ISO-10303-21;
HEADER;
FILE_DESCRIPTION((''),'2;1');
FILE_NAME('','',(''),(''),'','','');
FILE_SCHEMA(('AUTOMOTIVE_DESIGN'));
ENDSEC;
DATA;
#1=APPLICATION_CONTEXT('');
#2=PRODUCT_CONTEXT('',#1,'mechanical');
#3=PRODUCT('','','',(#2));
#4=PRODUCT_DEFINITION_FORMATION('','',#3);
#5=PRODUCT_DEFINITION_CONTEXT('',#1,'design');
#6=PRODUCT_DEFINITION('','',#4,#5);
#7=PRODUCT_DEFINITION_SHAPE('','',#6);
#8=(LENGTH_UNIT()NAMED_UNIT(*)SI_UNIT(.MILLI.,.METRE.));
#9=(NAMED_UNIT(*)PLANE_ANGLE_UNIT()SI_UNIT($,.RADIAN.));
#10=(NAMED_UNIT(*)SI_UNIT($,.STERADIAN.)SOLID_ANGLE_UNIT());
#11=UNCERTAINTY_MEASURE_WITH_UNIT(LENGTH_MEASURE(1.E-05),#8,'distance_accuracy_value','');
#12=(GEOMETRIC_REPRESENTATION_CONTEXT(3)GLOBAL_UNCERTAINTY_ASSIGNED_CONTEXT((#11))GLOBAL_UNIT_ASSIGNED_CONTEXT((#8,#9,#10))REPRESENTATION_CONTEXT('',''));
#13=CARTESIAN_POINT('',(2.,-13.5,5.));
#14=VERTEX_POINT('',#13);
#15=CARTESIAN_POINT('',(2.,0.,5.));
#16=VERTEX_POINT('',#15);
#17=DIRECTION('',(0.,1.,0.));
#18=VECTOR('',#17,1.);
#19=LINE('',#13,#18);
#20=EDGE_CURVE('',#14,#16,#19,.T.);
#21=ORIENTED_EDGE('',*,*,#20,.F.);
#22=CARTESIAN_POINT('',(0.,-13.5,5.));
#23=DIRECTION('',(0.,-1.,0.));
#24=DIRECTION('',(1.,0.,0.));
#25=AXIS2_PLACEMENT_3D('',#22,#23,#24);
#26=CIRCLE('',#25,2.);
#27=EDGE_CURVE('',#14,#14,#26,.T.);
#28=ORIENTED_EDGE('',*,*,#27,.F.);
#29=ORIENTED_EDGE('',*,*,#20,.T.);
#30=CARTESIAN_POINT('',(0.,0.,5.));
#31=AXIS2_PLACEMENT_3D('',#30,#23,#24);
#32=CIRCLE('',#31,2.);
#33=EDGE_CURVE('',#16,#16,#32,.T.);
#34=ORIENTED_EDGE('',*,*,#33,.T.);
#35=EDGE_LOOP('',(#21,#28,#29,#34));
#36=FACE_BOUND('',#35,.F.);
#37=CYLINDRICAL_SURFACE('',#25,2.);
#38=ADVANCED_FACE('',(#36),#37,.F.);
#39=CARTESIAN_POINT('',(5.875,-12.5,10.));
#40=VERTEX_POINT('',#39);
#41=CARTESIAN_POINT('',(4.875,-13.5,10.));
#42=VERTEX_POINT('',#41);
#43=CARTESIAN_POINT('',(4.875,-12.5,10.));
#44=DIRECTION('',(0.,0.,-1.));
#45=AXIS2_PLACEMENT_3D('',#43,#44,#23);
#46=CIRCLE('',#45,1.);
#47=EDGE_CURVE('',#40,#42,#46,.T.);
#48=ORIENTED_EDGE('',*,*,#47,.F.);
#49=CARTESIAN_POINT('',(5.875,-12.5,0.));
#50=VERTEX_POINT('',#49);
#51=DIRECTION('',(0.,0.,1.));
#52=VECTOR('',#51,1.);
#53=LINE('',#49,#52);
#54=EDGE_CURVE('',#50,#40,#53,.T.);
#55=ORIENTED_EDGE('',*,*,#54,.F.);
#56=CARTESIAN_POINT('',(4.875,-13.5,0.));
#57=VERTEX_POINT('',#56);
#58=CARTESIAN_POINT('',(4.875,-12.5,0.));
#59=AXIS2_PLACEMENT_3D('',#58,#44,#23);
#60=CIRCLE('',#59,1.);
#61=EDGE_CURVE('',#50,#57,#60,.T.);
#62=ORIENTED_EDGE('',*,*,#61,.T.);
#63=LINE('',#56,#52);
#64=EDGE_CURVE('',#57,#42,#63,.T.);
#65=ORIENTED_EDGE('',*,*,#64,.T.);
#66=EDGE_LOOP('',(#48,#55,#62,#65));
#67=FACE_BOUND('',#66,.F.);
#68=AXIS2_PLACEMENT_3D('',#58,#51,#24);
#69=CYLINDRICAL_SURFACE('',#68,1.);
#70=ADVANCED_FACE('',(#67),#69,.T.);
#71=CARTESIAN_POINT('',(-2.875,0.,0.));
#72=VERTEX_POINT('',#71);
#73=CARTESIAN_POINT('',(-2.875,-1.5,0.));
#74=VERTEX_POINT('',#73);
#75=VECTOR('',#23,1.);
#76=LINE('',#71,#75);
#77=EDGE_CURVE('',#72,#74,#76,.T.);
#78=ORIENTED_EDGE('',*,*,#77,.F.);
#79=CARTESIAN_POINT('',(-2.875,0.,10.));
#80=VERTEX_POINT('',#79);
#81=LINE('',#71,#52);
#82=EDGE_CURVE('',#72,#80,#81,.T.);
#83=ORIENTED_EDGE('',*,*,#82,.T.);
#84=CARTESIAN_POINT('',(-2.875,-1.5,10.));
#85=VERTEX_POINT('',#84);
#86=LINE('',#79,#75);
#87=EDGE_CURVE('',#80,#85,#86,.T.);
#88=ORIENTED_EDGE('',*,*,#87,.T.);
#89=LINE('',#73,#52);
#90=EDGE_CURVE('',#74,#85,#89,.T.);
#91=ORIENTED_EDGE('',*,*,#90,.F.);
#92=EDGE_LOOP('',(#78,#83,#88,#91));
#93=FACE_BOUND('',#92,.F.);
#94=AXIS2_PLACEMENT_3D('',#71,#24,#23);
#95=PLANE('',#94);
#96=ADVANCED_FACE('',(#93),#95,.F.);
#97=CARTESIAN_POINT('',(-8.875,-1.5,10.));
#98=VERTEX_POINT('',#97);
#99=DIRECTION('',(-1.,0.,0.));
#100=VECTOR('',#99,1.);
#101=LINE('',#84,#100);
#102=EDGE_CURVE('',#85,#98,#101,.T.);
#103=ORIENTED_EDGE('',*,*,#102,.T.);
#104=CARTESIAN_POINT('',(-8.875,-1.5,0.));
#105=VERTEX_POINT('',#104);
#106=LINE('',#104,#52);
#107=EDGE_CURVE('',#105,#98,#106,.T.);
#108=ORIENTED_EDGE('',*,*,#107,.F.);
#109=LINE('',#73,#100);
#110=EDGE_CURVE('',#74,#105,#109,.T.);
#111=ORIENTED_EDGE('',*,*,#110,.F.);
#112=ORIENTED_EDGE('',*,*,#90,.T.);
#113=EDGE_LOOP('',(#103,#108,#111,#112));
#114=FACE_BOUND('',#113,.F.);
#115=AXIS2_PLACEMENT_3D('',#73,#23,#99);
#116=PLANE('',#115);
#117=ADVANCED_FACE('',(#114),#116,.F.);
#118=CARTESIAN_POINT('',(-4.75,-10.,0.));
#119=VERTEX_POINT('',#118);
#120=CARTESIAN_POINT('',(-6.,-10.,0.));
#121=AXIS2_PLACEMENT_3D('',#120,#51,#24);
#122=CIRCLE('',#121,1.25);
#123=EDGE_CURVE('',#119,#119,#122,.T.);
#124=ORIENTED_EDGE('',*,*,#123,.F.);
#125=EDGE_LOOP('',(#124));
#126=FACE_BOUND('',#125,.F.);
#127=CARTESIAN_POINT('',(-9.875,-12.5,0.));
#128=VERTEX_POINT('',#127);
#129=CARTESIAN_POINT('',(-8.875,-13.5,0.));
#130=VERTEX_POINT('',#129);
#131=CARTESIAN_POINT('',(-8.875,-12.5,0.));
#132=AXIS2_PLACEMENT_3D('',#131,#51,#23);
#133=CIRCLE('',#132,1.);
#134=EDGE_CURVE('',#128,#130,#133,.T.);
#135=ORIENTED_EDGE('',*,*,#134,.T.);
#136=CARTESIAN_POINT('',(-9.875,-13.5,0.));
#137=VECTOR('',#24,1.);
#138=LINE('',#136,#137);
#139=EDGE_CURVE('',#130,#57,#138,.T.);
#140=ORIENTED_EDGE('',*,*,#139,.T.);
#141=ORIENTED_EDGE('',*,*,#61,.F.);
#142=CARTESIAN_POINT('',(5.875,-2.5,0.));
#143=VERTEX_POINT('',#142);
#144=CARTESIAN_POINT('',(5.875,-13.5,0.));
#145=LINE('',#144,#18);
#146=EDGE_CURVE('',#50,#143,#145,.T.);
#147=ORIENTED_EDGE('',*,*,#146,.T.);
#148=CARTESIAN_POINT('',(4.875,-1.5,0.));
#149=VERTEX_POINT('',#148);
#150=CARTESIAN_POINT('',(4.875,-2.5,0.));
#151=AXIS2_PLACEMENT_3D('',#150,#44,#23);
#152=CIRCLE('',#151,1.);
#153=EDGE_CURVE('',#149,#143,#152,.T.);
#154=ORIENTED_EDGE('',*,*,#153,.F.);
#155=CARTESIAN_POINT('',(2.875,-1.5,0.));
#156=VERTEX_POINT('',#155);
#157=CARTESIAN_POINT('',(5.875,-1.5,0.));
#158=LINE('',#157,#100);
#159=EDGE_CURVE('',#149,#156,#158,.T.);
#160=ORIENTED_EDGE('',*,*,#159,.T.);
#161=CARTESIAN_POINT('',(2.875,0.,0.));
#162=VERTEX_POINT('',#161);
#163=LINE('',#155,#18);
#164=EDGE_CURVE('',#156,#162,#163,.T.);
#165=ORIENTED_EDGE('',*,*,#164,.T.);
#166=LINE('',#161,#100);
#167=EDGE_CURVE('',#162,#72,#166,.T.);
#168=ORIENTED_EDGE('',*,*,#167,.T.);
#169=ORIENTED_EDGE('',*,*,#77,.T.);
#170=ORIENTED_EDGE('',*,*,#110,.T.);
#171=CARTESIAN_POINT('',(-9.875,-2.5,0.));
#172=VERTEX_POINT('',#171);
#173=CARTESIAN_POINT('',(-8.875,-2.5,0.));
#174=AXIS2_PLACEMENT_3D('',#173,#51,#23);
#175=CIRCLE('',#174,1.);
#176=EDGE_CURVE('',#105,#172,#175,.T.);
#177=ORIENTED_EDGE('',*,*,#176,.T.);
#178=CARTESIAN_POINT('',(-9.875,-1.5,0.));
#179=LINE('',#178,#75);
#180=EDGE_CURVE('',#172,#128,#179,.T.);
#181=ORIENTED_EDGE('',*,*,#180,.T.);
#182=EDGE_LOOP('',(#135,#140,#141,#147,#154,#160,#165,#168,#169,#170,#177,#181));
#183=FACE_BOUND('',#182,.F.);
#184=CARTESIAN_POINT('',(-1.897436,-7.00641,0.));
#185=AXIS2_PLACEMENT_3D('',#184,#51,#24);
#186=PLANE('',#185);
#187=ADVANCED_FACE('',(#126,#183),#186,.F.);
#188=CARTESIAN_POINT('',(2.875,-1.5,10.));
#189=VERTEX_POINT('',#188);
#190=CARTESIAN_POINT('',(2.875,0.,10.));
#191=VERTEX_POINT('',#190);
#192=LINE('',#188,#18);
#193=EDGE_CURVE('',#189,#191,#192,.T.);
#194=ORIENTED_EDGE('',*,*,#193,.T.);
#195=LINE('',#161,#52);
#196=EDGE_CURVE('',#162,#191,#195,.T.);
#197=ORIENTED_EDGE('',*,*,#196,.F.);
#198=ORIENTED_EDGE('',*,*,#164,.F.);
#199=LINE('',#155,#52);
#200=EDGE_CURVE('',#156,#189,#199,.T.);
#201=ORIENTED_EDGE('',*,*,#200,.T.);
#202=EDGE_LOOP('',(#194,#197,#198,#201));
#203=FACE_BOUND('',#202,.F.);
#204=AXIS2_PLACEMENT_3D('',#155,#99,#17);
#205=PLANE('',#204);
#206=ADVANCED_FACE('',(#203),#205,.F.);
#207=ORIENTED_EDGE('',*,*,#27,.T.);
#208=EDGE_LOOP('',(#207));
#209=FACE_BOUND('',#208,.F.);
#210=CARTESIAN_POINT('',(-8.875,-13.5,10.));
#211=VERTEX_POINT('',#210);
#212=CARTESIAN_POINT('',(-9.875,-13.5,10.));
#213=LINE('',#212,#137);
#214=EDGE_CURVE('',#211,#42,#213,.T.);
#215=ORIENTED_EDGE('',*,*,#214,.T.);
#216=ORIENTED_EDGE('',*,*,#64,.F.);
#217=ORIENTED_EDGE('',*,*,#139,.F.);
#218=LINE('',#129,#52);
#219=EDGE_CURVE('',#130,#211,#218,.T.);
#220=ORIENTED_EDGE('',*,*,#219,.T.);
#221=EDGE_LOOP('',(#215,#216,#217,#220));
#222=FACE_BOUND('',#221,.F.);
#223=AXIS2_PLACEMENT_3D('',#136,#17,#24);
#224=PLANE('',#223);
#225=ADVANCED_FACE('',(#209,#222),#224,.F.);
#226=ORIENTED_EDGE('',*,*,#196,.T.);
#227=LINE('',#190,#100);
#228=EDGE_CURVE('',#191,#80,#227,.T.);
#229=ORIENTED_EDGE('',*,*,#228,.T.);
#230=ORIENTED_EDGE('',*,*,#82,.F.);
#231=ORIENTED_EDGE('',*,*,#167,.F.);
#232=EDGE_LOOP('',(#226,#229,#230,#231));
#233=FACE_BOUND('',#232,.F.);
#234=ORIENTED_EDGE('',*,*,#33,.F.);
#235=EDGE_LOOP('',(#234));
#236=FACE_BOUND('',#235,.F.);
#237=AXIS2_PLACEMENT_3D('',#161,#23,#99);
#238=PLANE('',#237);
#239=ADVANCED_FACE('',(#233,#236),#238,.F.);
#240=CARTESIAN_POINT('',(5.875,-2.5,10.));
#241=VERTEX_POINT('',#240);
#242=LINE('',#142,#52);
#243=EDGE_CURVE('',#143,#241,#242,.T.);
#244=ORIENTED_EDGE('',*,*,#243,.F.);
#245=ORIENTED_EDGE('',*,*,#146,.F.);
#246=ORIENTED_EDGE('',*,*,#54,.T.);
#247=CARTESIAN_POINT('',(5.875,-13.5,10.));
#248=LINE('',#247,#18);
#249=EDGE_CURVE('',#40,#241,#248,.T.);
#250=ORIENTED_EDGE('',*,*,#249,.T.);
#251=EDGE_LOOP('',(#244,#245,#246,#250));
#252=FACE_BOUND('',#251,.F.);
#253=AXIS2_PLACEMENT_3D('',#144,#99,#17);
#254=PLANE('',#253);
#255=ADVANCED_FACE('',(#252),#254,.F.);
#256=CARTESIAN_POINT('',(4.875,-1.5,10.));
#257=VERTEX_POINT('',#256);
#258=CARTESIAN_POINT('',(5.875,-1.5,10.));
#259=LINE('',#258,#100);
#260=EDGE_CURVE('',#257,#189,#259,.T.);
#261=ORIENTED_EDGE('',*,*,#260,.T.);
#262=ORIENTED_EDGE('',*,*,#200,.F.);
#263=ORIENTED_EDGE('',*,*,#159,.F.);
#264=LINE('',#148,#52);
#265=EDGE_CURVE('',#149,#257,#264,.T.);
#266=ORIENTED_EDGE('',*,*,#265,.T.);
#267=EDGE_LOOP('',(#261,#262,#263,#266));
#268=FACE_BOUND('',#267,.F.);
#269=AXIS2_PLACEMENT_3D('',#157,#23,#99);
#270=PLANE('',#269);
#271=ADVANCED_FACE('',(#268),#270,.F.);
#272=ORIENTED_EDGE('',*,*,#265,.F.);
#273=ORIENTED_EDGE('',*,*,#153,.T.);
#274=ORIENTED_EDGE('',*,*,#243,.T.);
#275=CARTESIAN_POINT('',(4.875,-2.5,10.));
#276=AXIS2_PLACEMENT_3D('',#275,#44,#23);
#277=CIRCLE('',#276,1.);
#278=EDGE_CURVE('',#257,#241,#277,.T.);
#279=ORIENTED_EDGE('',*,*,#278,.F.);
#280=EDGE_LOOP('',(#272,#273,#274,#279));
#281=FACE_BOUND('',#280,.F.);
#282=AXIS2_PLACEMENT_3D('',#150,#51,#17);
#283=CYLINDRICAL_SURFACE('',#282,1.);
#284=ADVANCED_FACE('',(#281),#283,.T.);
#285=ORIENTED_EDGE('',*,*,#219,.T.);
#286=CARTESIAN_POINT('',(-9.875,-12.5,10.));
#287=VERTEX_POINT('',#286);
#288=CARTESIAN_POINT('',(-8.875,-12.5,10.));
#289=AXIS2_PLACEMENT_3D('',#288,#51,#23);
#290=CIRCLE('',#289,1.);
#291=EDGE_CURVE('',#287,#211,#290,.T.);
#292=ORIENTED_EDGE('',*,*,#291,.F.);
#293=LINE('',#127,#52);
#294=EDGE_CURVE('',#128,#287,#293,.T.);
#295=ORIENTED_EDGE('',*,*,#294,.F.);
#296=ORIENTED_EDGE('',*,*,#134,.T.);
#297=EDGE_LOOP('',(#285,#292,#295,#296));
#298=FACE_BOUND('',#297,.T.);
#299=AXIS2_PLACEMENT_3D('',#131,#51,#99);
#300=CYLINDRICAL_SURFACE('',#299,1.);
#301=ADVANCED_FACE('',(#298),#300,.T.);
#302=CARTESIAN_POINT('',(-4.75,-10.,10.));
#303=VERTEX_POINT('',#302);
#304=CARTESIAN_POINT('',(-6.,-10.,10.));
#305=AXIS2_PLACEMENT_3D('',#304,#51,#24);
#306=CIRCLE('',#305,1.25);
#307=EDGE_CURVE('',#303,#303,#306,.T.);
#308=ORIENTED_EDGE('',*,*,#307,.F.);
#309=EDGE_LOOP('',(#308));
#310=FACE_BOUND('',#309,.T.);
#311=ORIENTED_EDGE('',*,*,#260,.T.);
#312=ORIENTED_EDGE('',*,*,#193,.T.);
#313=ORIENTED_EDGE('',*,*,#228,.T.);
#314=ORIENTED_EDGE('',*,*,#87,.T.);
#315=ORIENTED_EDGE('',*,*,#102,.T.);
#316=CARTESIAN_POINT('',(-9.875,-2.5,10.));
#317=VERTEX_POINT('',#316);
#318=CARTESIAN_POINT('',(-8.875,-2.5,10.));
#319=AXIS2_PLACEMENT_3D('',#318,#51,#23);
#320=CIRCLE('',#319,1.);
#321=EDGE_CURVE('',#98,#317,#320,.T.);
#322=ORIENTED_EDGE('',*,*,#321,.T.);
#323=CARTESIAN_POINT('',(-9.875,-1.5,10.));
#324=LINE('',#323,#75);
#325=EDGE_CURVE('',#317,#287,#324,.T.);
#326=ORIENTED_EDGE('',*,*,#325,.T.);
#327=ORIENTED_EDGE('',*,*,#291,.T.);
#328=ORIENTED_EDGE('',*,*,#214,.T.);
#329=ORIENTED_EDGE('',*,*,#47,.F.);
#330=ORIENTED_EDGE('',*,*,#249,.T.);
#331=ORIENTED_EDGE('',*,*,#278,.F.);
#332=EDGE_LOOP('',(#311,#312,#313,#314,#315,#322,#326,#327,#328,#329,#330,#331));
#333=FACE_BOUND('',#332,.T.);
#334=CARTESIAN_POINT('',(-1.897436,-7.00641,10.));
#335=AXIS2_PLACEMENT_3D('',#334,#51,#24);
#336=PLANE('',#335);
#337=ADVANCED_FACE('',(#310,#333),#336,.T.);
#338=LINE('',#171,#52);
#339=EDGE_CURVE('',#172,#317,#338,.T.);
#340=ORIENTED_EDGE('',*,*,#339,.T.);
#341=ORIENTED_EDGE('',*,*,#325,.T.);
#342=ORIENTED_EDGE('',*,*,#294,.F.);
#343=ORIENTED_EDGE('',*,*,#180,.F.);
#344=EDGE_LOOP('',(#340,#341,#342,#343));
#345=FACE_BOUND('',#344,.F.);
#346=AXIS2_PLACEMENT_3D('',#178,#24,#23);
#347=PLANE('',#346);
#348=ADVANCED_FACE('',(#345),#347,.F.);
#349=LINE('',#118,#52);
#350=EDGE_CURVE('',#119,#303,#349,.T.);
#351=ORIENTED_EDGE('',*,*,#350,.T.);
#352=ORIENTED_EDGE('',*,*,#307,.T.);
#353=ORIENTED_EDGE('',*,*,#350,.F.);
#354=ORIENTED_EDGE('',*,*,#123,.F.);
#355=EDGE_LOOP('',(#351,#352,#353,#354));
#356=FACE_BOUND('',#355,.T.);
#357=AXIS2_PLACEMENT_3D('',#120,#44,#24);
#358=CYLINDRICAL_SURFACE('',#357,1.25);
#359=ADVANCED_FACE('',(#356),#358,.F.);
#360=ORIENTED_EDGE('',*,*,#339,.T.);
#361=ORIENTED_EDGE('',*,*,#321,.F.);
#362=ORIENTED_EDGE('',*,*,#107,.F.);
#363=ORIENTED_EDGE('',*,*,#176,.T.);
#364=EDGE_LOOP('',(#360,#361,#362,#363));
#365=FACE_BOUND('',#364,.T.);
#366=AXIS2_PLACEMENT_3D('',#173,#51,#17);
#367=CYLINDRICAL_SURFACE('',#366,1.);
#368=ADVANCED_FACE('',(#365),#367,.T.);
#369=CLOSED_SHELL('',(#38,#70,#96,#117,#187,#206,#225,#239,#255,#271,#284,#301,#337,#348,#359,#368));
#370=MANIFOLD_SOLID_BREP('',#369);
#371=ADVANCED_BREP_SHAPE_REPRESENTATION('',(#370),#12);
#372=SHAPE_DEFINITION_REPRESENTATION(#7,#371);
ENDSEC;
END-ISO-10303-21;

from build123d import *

# Parameters (mm, degrees)
F0_R     = 1.25
F1_DEPTH = 10
F2_R     = 2
F3_DEPTH = 13.501
F4_R     = 1


# Not quite as in the source:
# - a feature names something its author has since deleted; it is built from what else it names


with BuildPart() as f1:
    # F0 (on Top) → F1 (new body)
    with BuildSketch(Plane.XY):
        Polygon((2.875, 0), (-2.875, 0), (-2.875, -1.5), (-9.875, -1.5), (-9.875, -13.5), (5.875, -13.5), (5.875, -1.5), (2.875, -1.5), align=None)
        with Locations((-6, -10)):
            Circle(F0_R, mode=Mode.SUBTRACT)
    extrude(amount=F1_DEPTH)

    # F2 (on face) → F3 (cut, through all)
    with BuildSketch(Plane.XZ.offset(13.5)):
        with Locations((0, 5)):
            Circle(F2_R)
    extrude(amount=-F3_DEPTH, mode=Mode.SUBTRACT)

    # F4
    f4_edges = [f1.edges().sort_by_distance(p)[0] for p in [
        (5.875, -1.5, 5),
        (5.875, -13.5, 5),
        (-9.875, -1.5, 5),
        (-9.875, -13.5, 5),
    ]]
    fillet(f4_edges, radius=F4_R)


solid = f1.part
